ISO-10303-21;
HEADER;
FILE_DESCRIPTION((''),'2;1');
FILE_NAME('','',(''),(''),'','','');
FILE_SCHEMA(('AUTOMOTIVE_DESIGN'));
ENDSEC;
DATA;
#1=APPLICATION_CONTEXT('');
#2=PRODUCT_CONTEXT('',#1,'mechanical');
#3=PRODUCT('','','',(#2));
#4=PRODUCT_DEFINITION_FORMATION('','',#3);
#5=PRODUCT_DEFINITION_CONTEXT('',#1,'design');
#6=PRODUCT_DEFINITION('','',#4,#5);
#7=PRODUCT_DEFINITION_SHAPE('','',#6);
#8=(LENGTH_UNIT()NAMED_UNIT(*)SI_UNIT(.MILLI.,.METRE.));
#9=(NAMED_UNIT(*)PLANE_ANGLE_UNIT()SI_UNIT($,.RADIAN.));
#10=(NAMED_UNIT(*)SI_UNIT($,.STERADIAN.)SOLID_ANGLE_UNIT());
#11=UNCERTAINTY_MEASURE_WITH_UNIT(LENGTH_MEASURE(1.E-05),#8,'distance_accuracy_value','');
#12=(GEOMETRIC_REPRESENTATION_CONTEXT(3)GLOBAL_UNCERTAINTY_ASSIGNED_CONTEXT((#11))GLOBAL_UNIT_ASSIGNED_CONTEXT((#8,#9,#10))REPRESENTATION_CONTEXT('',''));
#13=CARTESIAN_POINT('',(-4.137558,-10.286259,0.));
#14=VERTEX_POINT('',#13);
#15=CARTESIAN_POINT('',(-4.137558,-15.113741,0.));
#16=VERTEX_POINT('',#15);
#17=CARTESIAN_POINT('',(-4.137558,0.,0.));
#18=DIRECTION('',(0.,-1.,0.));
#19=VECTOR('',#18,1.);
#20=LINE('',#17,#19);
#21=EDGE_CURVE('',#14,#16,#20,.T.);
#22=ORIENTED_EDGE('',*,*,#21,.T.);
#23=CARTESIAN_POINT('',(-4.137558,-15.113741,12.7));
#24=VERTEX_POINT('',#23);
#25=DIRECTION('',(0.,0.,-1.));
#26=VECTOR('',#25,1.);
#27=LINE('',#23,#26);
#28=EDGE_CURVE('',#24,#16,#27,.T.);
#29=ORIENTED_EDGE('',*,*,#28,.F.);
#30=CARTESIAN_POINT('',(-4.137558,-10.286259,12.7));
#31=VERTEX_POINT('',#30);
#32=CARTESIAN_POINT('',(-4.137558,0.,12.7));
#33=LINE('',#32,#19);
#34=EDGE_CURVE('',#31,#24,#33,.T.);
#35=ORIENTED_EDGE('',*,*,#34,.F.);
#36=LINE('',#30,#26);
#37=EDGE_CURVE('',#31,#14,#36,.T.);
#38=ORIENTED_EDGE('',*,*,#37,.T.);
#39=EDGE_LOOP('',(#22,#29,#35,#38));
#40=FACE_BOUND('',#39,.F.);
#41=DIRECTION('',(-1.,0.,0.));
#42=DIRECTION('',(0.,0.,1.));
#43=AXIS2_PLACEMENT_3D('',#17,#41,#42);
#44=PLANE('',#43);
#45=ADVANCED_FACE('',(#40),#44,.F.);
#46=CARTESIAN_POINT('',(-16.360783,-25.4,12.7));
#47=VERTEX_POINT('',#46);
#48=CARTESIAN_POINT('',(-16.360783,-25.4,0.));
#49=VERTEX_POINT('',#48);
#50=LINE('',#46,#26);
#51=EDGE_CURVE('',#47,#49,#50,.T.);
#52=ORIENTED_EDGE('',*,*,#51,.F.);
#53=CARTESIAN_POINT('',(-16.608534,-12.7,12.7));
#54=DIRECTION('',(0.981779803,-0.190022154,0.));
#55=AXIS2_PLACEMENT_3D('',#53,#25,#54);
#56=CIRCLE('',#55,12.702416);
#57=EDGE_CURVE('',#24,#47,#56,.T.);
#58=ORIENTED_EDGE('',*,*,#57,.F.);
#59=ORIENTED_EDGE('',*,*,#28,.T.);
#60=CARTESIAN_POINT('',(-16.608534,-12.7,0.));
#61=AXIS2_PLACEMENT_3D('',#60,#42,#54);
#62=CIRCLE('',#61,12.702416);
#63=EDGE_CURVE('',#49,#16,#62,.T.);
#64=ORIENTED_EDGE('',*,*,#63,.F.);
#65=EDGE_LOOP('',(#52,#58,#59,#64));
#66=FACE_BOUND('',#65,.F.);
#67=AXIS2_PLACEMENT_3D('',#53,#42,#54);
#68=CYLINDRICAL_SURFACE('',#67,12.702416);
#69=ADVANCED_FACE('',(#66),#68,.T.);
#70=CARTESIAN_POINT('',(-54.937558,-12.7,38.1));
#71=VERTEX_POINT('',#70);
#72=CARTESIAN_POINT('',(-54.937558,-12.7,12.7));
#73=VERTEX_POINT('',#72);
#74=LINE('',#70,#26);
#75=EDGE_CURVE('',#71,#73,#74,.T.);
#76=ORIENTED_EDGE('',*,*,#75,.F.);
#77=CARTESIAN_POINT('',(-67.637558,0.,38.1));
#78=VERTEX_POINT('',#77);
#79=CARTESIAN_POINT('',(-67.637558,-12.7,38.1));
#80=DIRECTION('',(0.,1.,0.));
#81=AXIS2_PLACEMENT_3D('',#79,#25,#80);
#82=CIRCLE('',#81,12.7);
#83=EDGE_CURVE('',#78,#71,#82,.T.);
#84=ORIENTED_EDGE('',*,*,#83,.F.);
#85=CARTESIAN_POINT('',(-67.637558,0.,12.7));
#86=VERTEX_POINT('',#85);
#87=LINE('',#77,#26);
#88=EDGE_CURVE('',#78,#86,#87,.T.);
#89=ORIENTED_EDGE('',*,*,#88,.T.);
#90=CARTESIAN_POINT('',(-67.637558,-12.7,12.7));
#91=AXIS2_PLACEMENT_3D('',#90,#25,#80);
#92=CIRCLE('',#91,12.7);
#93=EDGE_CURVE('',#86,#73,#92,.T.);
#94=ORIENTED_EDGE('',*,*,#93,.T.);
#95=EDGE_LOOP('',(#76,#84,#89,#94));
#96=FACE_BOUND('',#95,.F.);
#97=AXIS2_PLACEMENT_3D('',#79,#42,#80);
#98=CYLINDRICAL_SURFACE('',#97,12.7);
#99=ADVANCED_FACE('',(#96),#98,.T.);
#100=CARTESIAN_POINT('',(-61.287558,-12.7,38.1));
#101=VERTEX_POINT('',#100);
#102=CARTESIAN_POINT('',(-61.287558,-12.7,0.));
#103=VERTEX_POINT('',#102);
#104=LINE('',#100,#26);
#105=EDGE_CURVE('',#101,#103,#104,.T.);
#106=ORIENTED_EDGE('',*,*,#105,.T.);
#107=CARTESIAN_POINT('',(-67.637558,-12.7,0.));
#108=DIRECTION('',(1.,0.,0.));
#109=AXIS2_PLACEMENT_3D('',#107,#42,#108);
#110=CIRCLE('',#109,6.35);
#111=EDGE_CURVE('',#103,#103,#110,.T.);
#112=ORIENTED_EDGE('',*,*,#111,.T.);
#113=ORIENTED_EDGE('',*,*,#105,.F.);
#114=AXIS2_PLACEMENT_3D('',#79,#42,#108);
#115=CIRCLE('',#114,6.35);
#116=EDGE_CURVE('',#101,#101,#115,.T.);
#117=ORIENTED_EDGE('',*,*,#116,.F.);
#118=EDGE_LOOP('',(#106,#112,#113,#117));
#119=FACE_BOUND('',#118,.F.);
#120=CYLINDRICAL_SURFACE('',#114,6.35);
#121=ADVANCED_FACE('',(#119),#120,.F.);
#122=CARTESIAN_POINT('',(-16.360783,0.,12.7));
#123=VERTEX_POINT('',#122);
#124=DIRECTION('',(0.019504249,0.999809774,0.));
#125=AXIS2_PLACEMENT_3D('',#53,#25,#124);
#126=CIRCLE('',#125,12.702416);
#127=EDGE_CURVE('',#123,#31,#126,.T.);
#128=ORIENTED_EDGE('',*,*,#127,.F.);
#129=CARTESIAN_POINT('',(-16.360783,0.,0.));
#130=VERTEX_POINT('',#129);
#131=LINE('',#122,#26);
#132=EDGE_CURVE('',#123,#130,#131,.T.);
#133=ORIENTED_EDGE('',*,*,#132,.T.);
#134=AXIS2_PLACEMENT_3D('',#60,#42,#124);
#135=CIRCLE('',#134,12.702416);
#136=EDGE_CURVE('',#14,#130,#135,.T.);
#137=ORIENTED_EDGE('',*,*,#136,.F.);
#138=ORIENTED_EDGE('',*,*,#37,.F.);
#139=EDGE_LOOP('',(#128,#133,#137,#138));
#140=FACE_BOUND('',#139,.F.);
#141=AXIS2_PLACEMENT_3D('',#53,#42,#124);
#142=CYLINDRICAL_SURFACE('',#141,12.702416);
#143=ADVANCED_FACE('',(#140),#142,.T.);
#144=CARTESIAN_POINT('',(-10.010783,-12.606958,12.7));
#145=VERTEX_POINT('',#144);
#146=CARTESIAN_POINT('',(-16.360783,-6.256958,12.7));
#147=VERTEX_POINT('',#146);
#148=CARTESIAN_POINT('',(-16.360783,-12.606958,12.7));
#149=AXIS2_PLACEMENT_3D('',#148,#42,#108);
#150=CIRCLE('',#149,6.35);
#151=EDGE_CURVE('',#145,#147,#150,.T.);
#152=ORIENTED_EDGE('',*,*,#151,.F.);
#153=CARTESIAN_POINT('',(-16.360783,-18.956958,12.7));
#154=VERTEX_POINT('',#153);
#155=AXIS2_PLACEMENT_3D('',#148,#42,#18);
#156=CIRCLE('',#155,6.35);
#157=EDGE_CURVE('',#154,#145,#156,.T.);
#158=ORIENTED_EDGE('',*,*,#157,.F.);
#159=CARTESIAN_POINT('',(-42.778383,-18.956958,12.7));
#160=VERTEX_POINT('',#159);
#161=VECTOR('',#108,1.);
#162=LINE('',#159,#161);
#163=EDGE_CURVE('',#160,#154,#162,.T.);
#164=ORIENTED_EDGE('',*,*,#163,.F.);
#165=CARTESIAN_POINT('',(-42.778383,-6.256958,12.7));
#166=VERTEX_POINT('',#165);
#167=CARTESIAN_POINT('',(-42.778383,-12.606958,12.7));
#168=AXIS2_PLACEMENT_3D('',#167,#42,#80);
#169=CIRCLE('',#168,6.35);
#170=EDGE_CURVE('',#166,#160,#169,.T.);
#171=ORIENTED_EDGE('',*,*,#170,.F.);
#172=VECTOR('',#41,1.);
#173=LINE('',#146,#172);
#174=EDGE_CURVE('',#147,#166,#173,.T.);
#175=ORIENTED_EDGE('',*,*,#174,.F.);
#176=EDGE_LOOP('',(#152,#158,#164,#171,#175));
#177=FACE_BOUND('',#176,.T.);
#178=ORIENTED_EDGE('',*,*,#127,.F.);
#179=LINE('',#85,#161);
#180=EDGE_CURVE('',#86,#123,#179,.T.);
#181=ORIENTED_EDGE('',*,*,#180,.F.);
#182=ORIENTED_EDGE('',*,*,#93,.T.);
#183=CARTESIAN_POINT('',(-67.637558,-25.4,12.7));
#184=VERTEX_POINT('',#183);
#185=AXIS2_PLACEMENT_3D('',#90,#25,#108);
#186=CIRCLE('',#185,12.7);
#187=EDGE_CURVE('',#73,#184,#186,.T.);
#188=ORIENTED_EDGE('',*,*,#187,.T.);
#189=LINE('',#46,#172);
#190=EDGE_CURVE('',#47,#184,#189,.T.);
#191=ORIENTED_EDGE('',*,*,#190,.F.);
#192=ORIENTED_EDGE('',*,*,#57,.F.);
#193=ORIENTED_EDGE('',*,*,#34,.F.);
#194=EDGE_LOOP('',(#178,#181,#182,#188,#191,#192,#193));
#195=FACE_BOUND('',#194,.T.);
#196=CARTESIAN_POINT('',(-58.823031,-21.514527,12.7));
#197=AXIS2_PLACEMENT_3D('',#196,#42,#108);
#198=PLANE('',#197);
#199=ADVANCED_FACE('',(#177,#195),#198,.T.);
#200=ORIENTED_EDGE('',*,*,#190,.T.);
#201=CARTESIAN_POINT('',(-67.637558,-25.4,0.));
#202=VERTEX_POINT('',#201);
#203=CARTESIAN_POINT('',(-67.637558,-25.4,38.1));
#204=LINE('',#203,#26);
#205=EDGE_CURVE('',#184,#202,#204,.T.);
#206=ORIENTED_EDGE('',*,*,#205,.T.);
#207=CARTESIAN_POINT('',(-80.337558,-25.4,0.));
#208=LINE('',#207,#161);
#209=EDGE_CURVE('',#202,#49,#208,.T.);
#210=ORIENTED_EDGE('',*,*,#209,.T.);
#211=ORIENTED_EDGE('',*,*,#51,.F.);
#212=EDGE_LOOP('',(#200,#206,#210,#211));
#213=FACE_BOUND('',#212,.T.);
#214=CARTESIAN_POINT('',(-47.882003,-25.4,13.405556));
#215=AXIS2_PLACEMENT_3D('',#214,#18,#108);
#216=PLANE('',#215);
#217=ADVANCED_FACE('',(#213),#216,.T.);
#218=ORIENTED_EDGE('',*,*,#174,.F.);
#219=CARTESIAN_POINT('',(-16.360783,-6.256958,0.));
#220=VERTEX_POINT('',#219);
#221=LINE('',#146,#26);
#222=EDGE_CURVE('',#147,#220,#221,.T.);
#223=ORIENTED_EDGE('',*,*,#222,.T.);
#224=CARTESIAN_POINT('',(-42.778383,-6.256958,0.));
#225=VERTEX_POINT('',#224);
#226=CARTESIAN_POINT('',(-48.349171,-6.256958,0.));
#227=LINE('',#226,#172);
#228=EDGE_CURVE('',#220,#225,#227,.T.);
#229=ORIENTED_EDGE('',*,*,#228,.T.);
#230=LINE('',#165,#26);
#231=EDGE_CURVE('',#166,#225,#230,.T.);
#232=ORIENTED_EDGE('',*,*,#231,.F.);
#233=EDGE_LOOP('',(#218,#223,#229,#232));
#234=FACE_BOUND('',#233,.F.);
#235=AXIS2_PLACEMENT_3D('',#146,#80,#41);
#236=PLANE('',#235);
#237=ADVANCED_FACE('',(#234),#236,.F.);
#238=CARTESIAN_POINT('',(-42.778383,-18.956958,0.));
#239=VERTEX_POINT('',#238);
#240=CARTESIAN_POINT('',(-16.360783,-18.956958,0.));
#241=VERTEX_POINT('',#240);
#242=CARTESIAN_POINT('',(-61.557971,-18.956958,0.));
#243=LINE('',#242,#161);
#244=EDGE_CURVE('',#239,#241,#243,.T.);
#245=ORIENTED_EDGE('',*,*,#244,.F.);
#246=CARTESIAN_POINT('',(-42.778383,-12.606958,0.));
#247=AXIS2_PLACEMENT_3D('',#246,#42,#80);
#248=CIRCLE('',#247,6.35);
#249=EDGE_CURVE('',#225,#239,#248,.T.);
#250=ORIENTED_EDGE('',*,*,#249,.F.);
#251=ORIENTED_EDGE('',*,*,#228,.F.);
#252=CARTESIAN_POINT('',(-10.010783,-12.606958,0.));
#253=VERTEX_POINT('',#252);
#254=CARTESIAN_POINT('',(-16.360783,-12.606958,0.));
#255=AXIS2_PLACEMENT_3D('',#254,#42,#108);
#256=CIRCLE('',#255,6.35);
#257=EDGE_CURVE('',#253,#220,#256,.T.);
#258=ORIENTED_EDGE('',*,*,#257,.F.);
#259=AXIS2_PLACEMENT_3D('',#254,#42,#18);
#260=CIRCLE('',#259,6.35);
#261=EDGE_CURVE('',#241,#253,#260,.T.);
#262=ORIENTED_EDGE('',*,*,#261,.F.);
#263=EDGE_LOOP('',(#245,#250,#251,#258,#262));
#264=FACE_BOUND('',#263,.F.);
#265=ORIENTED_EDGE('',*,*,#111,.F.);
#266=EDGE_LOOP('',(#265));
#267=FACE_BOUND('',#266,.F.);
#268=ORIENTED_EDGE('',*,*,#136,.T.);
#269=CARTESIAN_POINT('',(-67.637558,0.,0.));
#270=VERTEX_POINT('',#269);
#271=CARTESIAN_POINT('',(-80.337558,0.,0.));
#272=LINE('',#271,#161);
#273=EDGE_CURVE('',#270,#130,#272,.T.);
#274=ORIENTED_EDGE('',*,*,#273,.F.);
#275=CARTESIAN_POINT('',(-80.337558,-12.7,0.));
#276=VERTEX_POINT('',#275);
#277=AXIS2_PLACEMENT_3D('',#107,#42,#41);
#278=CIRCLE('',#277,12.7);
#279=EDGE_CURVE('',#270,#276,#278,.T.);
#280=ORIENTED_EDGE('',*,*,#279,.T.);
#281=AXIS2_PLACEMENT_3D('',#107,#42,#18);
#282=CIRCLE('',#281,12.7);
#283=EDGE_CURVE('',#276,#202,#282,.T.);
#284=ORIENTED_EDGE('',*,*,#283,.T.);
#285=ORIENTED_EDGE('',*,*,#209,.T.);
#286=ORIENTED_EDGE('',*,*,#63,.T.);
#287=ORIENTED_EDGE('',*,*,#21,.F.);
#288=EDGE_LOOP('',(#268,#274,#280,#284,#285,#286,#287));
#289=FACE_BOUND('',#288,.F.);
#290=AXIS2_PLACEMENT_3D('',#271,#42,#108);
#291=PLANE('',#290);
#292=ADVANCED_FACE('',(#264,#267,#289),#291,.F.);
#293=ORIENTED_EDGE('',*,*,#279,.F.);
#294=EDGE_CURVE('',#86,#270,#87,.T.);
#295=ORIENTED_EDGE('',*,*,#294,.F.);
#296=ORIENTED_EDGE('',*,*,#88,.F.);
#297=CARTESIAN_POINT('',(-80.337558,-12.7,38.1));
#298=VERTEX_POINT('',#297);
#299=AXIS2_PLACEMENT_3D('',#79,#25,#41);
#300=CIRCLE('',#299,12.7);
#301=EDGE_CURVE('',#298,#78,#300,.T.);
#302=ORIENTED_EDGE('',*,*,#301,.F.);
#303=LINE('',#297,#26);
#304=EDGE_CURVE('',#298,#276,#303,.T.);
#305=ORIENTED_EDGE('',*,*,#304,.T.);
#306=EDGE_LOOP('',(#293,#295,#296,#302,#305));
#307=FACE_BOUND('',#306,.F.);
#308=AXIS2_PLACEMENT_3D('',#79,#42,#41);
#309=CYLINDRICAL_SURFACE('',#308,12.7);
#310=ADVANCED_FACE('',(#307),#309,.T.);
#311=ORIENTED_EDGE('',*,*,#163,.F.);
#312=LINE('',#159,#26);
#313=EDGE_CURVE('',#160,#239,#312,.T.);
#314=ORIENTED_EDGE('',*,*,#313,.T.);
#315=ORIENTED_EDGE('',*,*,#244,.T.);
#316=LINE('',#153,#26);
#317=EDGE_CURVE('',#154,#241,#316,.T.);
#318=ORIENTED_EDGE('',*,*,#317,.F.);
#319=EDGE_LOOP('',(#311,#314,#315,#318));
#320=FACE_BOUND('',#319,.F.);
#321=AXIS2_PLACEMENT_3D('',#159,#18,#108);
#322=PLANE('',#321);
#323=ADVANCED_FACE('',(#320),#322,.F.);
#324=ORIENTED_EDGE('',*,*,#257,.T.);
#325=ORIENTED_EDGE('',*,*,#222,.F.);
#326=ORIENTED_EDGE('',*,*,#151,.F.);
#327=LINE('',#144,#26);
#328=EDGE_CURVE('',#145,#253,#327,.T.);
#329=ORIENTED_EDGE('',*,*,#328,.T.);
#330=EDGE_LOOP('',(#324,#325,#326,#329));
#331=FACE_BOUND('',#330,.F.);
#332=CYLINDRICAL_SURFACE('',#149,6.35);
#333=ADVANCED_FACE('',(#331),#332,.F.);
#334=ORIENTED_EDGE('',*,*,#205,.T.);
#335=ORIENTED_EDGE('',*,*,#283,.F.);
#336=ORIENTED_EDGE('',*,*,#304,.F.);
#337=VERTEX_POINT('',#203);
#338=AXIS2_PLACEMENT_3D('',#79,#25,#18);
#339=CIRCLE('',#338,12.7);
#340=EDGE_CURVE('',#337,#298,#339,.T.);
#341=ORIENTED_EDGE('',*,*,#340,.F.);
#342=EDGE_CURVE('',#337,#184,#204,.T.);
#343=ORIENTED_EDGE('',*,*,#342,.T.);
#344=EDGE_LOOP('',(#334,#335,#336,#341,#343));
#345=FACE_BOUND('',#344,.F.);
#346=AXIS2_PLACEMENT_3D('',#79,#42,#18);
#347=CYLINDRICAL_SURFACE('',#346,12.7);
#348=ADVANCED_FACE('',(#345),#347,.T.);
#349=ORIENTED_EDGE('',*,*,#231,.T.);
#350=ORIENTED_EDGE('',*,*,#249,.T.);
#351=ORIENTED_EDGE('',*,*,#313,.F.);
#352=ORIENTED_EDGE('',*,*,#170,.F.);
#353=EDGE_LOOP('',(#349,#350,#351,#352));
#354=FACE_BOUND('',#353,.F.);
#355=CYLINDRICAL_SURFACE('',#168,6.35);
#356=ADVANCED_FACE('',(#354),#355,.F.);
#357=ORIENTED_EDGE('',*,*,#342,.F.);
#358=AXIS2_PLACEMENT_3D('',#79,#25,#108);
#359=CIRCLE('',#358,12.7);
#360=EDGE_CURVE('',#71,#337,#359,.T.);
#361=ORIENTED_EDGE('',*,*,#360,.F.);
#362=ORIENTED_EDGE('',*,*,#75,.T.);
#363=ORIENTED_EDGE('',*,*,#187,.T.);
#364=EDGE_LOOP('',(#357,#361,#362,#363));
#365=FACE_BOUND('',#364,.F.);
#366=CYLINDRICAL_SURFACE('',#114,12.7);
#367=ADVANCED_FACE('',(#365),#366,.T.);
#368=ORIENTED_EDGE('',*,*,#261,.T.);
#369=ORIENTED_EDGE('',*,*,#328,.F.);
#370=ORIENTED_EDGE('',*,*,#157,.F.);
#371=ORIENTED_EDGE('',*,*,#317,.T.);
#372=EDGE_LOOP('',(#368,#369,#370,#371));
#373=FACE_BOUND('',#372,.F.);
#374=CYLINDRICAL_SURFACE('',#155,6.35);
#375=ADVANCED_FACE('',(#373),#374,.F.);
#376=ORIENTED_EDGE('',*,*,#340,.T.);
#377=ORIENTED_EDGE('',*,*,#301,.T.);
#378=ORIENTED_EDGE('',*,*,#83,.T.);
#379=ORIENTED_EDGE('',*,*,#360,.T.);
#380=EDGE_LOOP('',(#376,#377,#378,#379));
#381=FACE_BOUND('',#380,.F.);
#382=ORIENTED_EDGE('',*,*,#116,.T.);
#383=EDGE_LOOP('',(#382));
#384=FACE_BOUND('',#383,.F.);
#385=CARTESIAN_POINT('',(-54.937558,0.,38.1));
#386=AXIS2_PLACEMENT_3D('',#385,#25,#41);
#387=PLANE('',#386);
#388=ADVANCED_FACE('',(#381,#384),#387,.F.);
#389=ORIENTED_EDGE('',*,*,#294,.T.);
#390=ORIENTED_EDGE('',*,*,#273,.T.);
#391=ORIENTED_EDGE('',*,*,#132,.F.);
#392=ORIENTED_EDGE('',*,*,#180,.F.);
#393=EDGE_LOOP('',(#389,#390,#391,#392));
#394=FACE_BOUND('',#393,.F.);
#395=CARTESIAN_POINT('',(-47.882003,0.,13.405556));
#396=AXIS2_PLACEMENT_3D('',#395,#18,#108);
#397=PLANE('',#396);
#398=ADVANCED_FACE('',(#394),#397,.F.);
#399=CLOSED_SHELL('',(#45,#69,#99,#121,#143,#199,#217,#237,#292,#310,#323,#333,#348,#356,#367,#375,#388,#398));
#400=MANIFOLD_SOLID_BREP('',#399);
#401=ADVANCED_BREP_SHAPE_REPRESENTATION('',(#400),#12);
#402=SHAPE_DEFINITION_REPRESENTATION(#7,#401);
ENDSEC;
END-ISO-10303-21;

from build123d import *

# Parameters (mm, degrees)
F1_DEPTH = 25.4
F3_DEPTH = 12.701
F4_R     = 6.35
F5_DEPTH = 38.101
F7_DEPTH = 25.4


with BuildPart() as f1:
    # F0 (on Front) → F1 (new body)
    with BuildSketch(Plane.XZ):
        Polygon((-54.9375581781, 38.1), (-80.3375581781, 38.1), (-80.3375581781, 0), (-4.1375581781, 0), (-4.1375581781, 12.7), (-54.9375581781, 12.7), align=None)
    extrude(amount=F1_DEPTH)

    # F2 (on face) → F3 (cut, through all)
    with BuildSketch(Plane.XY.offset(12.7)):
        with BuildLine():
            ThreePointArc((-36.4283830897, -12.6069579273), (-38.2882550292, -8.1168298668), (-42.7783830897, -6.2569579273))
            ThreePointArc((-42.7783830897, -6.2569579273), (-49.1283830897, -12.6069579273), (-42.7783830897, -18.9569579273))
            ThreePointArc((-42.7783830897, -18.9569579273), (-38.2882550292, -17.0970859879), (-36.4283830897, -12.6069579273))
        make_face()
        with BuildLine():
            ThreePointArc((-16.3607828855, -18.9569579273), (-22.7107828855, -12.6069579273), (-16.3607828855, -6.2569579273))
            Line((-16.3607828855, -6.2569579273), (-42.7783830897, -6.2569579273))
            ThreePointArc((-42.7783830897, -6.2569579273), (-38.2882550292, -8.1168298668), (-36.4283830897, -12.6069579273))
            ThreePointArc((-36.4283830897, -12.6069579273), (-38.2882550292, -17.0970859879), (-42.7783830897, -18.9569579273))
            Line((-42.7783830897, -18.9569579273), (-16.3607828855, -18.9569579273))
        make_face()
        with BuildLine():
            ThreePointArc((-16.3607828855, -18.9569579273), (-11.870654825, -17.0970859879), (-10.0107828855, -12.6069579273))
            ThreePointArc((-10.0107828855, -12.6069579273), (-11.870654825, -8.1168298668), (-16.3607828855, -6.2569579273))
            ThreePointArc((-16.3607828855, -6.2569579273), (-22.7107828855, -12.6069579273), (-16.3607828855, -18.9569579273))
        make_face()
        with BuildLine():
            ThreePointArc((-16.3607828855, 0), (-8.4297023381, -2.981044621), (-4.1375581781, -10.2862594838))
            Line((-4.1375581781, -10.2862594838), (-4.1375581781, 0))
            Line((-4.1375581781, 0), (-16.3607828855, 0))
        make_face()
        with BuildLine():
            ThreePointArc((-4.1375581781, -15.1137405162), (-8.4297023381, -22.418955379), (-16.3607828855, -25.4))
            Line((-16.3607828855, -25.4), (-4.1375581781, -25.4))
            Line((-4.1375581781, -25.4), (-4.1375581781, -15.1137405162))
        make_face()
    extrude(amount=-F3_DEPTH, mode=Mode.SUBTRACT)

    # F4 (on face) → F5 (cut, through all)
    with BuildSketch(Plane.XY.offset(38.1)):
        with BuildLine():
            ThreePointArc((-80.3375581781, -12.7), (-76.6178142992, -3.7197438789), (-67.6375581781, 0))
            Line((-67.6375581781, 0), (-80.3375581781, 0))
            Line((-80.3375581781, 0), (-80.3375581781, -12.7))
        make_face()
        with BuildLine():
            Line((-80.3375581781, -25.4), (-67.6375581781, -25.4))
            ThreePointArc((-67.6375581781, -25.4), (-76.6178142992, -21.6802561211), (-80.3375581781, -12.7))
            Line((-80.3375581781, -12.7), (-80.3375581781, -25.4))
        make_face()
        with Locations((-67.6375581781, -12.7)):
            Circle(F4_R)
    extrude(amount=-F5_DEPTH, mode=Mode.SUBTRACT)

    # F6 (on face) → F7 (cut)
    with BuildSketch(Plane.XY.offset(38.1)):
        with BuildLine():
            ThreePointArc((-54.9375581781, -12.7), (-58.657302057, -21.6802561211), (-67.6375581781, -25.4))
            Line((-67.6375581781, -25.4), (-54.9375581781, -25.4))
            Line((-54.9375581781, -25.4), (-54.9375581781, -12.7))
        make_face()
        with BuildLine():
            ThreePointArc((-67.6375581781, 0), (-58.657302057, -3.7197438789), (-54.9375581781, -12.7))
            Line((-54.9375581781, -12.7), (-54.9375581781, 0))
            Line((-54.9375581781, 0), (-67.6375581781, 0))
        make_face()
    extrude(amount=-F7_DEPTH, mode=Mode.SUBTRACT)


solid = f1.part
